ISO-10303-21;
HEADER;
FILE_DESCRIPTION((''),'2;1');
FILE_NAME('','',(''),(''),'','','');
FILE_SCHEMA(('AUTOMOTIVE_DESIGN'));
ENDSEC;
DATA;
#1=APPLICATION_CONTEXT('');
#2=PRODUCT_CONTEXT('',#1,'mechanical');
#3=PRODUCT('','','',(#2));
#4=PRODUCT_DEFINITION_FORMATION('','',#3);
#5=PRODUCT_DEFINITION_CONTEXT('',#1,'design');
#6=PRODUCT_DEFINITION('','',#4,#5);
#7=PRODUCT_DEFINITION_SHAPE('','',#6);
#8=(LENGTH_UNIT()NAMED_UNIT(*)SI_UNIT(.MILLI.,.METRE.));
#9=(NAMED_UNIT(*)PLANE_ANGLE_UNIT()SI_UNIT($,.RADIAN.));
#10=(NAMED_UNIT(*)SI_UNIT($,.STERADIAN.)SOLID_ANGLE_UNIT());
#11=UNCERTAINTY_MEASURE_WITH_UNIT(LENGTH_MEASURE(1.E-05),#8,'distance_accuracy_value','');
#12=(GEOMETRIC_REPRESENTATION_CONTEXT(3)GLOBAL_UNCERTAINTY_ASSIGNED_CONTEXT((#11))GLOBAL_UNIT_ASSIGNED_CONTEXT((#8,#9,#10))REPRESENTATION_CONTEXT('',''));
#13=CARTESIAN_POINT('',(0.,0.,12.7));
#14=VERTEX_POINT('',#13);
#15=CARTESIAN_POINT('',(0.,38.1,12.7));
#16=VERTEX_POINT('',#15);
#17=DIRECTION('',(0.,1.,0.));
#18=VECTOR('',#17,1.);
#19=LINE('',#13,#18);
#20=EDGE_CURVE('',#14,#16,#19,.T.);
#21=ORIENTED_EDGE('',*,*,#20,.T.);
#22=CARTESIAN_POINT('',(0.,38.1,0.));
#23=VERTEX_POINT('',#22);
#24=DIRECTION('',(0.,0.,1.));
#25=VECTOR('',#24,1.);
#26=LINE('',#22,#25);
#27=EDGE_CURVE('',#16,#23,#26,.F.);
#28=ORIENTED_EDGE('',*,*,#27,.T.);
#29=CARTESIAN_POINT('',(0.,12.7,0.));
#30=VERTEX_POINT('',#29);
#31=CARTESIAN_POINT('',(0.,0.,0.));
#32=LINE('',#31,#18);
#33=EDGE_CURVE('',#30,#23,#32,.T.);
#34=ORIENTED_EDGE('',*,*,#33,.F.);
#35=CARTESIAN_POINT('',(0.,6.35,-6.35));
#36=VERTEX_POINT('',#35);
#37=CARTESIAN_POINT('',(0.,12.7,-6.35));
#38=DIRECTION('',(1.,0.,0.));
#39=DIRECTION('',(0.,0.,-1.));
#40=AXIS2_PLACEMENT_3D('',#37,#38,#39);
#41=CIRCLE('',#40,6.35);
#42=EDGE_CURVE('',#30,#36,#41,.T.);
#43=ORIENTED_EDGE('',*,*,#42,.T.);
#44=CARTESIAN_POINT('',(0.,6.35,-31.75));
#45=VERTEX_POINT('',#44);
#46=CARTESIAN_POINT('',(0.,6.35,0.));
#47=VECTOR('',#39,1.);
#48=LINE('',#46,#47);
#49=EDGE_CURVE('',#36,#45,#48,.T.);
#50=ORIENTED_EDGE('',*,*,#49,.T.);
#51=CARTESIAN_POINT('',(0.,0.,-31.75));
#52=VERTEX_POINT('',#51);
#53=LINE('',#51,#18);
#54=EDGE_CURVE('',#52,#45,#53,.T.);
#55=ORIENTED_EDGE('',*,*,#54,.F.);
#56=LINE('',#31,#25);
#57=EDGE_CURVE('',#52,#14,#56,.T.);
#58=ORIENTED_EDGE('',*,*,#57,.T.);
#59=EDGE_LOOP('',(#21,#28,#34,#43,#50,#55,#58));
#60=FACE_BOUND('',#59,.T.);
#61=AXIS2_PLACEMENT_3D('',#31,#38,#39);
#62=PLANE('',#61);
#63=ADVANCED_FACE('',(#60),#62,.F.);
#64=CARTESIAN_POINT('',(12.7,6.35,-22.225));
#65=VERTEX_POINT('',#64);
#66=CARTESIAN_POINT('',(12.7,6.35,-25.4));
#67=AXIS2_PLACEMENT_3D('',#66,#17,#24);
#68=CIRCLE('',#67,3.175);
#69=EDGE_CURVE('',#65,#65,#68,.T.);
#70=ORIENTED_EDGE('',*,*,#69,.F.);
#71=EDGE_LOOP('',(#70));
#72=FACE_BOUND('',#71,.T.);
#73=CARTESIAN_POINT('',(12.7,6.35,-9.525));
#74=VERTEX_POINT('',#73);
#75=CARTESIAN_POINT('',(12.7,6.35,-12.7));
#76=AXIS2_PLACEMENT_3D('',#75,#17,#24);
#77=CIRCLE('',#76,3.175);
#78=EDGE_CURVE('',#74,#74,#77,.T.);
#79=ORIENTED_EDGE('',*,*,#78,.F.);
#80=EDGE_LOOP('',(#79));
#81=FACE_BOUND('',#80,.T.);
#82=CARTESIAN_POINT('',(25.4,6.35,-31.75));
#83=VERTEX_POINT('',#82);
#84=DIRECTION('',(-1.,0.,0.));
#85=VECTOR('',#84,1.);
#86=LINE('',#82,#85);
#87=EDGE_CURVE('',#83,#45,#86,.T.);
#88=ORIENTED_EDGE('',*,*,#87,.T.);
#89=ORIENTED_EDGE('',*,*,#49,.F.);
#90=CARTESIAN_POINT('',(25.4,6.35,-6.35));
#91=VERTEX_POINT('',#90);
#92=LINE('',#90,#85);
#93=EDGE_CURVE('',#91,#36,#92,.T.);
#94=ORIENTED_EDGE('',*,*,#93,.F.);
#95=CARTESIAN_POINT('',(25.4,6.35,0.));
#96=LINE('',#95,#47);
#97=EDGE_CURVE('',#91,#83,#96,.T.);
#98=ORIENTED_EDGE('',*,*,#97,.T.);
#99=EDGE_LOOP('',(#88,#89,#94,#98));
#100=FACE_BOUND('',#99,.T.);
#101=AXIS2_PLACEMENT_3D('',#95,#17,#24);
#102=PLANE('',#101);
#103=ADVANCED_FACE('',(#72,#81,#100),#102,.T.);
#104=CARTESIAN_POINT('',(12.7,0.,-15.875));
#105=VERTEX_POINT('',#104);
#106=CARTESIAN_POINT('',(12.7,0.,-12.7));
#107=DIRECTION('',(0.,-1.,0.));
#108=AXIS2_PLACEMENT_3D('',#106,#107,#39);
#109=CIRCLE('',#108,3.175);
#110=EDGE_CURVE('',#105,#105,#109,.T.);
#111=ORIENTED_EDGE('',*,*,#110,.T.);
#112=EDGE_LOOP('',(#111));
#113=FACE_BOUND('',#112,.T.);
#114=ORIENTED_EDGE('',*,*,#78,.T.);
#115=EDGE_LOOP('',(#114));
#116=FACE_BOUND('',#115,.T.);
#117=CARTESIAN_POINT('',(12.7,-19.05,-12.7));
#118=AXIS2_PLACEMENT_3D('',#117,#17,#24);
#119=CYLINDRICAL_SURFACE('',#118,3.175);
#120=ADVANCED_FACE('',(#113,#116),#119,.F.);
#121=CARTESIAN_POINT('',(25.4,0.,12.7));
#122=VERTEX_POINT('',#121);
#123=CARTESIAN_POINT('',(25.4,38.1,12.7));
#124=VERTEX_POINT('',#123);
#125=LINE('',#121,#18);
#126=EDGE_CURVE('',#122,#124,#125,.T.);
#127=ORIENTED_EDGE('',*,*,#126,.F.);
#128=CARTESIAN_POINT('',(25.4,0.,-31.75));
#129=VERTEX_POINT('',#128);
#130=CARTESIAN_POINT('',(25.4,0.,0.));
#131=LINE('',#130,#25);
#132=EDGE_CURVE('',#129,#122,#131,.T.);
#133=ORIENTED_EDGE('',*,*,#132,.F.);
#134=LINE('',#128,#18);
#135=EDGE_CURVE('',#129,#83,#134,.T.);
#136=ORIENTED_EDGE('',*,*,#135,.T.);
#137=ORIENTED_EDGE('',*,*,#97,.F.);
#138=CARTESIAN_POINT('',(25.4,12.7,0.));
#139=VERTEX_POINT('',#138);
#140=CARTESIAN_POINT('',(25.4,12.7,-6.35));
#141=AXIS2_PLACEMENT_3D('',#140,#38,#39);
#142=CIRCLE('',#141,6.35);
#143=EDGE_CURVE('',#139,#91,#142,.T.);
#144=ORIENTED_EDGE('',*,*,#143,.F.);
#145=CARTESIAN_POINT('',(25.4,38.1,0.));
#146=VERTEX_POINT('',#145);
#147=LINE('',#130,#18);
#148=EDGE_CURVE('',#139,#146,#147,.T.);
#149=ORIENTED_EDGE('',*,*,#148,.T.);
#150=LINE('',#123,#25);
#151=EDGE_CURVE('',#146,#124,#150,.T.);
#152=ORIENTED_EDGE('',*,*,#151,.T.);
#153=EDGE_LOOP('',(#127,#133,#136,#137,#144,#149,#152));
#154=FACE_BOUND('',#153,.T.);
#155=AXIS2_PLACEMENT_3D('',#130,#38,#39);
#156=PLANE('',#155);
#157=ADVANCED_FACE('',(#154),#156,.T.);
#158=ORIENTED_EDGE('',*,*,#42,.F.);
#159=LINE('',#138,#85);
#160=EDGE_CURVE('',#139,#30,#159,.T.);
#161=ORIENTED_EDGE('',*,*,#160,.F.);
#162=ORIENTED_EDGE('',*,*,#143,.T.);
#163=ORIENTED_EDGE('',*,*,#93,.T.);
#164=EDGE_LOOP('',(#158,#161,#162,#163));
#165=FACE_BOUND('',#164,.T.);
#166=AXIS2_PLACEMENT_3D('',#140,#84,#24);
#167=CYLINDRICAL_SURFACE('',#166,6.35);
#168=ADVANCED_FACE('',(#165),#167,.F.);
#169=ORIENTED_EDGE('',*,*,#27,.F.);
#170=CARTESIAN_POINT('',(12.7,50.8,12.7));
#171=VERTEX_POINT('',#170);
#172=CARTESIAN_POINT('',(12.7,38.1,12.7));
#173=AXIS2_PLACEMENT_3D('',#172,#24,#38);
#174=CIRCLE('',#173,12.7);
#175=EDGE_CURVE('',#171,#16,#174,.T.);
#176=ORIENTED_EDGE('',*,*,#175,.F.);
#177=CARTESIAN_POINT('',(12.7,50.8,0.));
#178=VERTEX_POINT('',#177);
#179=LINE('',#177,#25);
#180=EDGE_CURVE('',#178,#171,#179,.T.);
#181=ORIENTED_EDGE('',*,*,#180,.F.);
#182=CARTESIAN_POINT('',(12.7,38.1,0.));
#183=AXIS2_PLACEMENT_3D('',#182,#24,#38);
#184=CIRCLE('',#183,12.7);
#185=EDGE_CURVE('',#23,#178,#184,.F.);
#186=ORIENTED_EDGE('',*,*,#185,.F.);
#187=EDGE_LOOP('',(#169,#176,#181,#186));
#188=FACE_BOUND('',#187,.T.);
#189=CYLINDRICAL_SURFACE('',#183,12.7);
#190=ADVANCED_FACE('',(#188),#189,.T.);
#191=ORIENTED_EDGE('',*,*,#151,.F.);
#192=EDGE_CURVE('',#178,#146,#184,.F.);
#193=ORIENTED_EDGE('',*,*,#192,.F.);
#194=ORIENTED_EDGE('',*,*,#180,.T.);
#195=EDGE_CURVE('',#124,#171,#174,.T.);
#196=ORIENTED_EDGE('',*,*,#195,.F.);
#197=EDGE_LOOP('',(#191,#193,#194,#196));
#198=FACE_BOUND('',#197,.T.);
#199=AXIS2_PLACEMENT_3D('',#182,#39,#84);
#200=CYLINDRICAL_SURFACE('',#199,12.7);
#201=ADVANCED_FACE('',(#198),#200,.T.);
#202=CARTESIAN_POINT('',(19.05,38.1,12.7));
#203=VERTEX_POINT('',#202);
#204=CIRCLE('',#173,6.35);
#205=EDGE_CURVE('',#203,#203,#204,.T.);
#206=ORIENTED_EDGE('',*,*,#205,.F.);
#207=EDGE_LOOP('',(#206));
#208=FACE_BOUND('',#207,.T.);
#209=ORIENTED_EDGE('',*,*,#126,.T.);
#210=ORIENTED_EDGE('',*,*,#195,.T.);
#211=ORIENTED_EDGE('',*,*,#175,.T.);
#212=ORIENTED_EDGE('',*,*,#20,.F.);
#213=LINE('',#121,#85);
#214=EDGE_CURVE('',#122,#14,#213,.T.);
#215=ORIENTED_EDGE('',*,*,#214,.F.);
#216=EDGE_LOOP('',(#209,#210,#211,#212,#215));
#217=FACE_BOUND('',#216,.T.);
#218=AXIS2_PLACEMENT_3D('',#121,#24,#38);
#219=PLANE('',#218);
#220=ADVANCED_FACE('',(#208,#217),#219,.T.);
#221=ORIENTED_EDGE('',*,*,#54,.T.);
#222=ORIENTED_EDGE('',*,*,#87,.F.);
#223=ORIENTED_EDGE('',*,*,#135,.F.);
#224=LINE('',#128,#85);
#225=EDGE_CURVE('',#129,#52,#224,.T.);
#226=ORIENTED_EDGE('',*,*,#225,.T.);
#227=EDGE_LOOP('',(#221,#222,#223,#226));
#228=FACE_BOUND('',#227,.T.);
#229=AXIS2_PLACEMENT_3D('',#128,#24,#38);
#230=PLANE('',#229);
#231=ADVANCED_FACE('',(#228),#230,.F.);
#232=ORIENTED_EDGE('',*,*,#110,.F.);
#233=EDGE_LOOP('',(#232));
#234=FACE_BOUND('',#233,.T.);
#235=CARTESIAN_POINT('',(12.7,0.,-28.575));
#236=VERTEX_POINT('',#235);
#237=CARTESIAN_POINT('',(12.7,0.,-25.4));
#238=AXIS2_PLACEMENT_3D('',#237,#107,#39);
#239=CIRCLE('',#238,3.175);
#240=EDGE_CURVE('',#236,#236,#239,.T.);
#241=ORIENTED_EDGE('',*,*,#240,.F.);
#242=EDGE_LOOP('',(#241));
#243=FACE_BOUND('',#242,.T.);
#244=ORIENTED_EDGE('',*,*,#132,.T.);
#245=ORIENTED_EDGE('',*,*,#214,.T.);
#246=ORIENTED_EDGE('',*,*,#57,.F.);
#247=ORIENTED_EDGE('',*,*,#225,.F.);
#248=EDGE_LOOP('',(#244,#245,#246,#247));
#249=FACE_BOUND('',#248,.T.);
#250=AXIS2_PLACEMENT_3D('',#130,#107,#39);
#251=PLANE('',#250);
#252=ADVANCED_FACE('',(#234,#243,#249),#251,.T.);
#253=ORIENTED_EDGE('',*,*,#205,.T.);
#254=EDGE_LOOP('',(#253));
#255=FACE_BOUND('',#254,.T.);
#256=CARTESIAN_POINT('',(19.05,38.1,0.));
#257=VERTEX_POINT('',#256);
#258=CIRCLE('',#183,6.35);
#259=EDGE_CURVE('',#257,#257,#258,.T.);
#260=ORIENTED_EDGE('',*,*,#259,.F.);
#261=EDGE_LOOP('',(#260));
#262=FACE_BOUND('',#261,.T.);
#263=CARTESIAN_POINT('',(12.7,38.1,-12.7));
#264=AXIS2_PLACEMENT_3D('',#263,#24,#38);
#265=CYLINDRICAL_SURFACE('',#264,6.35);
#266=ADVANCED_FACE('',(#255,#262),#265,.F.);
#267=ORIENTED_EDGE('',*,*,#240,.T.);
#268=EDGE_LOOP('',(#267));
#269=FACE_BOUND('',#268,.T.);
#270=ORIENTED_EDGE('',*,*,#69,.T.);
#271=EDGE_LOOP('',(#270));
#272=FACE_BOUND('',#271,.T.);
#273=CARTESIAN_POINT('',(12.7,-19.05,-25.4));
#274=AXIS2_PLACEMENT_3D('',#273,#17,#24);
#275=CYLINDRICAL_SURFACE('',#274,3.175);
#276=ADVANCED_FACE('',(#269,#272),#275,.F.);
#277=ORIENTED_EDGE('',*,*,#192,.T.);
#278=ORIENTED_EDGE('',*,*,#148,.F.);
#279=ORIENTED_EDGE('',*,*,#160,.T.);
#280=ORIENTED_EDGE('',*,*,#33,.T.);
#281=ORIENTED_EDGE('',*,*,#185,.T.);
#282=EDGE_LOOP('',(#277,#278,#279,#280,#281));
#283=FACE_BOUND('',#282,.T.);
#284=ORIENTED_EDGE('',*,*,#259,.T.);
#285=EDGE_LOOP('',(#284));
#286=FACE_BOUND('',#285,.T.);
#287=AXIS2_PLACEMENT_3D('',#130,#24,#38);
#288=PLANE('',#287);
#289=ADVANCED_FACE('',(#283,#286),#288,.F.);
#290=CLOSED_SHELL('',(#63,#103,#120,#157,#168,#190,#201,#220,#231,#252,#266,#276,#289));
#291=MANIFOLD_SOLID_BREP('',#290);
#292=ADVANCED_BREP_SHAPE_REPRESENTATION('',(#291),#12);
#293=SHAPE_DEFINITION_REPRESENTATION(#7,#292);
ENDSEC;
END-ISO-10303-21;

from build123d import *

# Parameters (mm, degrees)
BOSS_EXTRUDE1_DEPTH = 25.4
FILLET1_R           = 12.7
SKETCH2_R           = 6.35
CUT_EXTRUDE1_DEPTH  = 25.4
SKETCH3_R           = 3.175
CUT_EXTRUDE2_DEPTH  = 25.4


with BuildPart() as part:
    # Sketch1 → Boss-Extrude1 (new body)
    with BuildSketch(Plane(origin=(0, 0, 0), x_dir=(0, 0, -1), z_dir=(1, 0, 0))):
        with BuildLine():
            Line((-12.7, 0), (0, 0))
            Line((0, 0), (31.75, 0))
            Line((31.75, 0), (31.75, 6.35))
            Line((31.75, 6.35), (6.35, 6.35))
            ThreePointArc((6.35, 6.35), (1.859871939, 8.209871939), (0, 12.7))
            Line((0, 12.7), (0, 50.8))
            Line((0, 50.8), (-12.7, 50.8))
            Line((-12.7, 50.8), (-12.7, 0))
        make_face()
    extrude(amount=BOSS_EXTRUDE1_DEPTH)

    # Fillet1
    fillet1_edges = [part.edges().sort_by_distance(p)[0] for p in [
        (25.4, 50.8, 6.35),
        (0, 50.8, 6.35),
    ]]
    fillet(fillet1_edges, radius=FILLET1_R - 0.0001)  # a hair under: the kernel refuses the full size

    # Sketch2 → Cut-Extrude1 (cut)
    with BuildSketch(Plane.XY.offset(12.7)):
        with Locations((12.7, 38.1)):
            Circle(SKETCH2_R)
    extrude(amount=-CUT_EXTRUDE1_DEPTH, mode=Mode.SUBTRACT)

    # Sketch3 → Cut-Extrude2 (cut)
    with BuildSketch(Plane(origin=(0, 6.35, 0), x_dir=(1, 0, 0), z_dir=(0, 1, 0))):
        with Locations(Location((12.7, 25.4, 0), (0, 0, 270))):
            Circle(SKETCH3_R)
        with Locations(Location((12.7, 12.7, 0), (0, 0, 270))):
            Circle(SKETCH3_R)
    extrude(amount=-CUT_EXTRUDE2_DEPTH, mode=Mode.SUBTRACT)


solid = part.part
